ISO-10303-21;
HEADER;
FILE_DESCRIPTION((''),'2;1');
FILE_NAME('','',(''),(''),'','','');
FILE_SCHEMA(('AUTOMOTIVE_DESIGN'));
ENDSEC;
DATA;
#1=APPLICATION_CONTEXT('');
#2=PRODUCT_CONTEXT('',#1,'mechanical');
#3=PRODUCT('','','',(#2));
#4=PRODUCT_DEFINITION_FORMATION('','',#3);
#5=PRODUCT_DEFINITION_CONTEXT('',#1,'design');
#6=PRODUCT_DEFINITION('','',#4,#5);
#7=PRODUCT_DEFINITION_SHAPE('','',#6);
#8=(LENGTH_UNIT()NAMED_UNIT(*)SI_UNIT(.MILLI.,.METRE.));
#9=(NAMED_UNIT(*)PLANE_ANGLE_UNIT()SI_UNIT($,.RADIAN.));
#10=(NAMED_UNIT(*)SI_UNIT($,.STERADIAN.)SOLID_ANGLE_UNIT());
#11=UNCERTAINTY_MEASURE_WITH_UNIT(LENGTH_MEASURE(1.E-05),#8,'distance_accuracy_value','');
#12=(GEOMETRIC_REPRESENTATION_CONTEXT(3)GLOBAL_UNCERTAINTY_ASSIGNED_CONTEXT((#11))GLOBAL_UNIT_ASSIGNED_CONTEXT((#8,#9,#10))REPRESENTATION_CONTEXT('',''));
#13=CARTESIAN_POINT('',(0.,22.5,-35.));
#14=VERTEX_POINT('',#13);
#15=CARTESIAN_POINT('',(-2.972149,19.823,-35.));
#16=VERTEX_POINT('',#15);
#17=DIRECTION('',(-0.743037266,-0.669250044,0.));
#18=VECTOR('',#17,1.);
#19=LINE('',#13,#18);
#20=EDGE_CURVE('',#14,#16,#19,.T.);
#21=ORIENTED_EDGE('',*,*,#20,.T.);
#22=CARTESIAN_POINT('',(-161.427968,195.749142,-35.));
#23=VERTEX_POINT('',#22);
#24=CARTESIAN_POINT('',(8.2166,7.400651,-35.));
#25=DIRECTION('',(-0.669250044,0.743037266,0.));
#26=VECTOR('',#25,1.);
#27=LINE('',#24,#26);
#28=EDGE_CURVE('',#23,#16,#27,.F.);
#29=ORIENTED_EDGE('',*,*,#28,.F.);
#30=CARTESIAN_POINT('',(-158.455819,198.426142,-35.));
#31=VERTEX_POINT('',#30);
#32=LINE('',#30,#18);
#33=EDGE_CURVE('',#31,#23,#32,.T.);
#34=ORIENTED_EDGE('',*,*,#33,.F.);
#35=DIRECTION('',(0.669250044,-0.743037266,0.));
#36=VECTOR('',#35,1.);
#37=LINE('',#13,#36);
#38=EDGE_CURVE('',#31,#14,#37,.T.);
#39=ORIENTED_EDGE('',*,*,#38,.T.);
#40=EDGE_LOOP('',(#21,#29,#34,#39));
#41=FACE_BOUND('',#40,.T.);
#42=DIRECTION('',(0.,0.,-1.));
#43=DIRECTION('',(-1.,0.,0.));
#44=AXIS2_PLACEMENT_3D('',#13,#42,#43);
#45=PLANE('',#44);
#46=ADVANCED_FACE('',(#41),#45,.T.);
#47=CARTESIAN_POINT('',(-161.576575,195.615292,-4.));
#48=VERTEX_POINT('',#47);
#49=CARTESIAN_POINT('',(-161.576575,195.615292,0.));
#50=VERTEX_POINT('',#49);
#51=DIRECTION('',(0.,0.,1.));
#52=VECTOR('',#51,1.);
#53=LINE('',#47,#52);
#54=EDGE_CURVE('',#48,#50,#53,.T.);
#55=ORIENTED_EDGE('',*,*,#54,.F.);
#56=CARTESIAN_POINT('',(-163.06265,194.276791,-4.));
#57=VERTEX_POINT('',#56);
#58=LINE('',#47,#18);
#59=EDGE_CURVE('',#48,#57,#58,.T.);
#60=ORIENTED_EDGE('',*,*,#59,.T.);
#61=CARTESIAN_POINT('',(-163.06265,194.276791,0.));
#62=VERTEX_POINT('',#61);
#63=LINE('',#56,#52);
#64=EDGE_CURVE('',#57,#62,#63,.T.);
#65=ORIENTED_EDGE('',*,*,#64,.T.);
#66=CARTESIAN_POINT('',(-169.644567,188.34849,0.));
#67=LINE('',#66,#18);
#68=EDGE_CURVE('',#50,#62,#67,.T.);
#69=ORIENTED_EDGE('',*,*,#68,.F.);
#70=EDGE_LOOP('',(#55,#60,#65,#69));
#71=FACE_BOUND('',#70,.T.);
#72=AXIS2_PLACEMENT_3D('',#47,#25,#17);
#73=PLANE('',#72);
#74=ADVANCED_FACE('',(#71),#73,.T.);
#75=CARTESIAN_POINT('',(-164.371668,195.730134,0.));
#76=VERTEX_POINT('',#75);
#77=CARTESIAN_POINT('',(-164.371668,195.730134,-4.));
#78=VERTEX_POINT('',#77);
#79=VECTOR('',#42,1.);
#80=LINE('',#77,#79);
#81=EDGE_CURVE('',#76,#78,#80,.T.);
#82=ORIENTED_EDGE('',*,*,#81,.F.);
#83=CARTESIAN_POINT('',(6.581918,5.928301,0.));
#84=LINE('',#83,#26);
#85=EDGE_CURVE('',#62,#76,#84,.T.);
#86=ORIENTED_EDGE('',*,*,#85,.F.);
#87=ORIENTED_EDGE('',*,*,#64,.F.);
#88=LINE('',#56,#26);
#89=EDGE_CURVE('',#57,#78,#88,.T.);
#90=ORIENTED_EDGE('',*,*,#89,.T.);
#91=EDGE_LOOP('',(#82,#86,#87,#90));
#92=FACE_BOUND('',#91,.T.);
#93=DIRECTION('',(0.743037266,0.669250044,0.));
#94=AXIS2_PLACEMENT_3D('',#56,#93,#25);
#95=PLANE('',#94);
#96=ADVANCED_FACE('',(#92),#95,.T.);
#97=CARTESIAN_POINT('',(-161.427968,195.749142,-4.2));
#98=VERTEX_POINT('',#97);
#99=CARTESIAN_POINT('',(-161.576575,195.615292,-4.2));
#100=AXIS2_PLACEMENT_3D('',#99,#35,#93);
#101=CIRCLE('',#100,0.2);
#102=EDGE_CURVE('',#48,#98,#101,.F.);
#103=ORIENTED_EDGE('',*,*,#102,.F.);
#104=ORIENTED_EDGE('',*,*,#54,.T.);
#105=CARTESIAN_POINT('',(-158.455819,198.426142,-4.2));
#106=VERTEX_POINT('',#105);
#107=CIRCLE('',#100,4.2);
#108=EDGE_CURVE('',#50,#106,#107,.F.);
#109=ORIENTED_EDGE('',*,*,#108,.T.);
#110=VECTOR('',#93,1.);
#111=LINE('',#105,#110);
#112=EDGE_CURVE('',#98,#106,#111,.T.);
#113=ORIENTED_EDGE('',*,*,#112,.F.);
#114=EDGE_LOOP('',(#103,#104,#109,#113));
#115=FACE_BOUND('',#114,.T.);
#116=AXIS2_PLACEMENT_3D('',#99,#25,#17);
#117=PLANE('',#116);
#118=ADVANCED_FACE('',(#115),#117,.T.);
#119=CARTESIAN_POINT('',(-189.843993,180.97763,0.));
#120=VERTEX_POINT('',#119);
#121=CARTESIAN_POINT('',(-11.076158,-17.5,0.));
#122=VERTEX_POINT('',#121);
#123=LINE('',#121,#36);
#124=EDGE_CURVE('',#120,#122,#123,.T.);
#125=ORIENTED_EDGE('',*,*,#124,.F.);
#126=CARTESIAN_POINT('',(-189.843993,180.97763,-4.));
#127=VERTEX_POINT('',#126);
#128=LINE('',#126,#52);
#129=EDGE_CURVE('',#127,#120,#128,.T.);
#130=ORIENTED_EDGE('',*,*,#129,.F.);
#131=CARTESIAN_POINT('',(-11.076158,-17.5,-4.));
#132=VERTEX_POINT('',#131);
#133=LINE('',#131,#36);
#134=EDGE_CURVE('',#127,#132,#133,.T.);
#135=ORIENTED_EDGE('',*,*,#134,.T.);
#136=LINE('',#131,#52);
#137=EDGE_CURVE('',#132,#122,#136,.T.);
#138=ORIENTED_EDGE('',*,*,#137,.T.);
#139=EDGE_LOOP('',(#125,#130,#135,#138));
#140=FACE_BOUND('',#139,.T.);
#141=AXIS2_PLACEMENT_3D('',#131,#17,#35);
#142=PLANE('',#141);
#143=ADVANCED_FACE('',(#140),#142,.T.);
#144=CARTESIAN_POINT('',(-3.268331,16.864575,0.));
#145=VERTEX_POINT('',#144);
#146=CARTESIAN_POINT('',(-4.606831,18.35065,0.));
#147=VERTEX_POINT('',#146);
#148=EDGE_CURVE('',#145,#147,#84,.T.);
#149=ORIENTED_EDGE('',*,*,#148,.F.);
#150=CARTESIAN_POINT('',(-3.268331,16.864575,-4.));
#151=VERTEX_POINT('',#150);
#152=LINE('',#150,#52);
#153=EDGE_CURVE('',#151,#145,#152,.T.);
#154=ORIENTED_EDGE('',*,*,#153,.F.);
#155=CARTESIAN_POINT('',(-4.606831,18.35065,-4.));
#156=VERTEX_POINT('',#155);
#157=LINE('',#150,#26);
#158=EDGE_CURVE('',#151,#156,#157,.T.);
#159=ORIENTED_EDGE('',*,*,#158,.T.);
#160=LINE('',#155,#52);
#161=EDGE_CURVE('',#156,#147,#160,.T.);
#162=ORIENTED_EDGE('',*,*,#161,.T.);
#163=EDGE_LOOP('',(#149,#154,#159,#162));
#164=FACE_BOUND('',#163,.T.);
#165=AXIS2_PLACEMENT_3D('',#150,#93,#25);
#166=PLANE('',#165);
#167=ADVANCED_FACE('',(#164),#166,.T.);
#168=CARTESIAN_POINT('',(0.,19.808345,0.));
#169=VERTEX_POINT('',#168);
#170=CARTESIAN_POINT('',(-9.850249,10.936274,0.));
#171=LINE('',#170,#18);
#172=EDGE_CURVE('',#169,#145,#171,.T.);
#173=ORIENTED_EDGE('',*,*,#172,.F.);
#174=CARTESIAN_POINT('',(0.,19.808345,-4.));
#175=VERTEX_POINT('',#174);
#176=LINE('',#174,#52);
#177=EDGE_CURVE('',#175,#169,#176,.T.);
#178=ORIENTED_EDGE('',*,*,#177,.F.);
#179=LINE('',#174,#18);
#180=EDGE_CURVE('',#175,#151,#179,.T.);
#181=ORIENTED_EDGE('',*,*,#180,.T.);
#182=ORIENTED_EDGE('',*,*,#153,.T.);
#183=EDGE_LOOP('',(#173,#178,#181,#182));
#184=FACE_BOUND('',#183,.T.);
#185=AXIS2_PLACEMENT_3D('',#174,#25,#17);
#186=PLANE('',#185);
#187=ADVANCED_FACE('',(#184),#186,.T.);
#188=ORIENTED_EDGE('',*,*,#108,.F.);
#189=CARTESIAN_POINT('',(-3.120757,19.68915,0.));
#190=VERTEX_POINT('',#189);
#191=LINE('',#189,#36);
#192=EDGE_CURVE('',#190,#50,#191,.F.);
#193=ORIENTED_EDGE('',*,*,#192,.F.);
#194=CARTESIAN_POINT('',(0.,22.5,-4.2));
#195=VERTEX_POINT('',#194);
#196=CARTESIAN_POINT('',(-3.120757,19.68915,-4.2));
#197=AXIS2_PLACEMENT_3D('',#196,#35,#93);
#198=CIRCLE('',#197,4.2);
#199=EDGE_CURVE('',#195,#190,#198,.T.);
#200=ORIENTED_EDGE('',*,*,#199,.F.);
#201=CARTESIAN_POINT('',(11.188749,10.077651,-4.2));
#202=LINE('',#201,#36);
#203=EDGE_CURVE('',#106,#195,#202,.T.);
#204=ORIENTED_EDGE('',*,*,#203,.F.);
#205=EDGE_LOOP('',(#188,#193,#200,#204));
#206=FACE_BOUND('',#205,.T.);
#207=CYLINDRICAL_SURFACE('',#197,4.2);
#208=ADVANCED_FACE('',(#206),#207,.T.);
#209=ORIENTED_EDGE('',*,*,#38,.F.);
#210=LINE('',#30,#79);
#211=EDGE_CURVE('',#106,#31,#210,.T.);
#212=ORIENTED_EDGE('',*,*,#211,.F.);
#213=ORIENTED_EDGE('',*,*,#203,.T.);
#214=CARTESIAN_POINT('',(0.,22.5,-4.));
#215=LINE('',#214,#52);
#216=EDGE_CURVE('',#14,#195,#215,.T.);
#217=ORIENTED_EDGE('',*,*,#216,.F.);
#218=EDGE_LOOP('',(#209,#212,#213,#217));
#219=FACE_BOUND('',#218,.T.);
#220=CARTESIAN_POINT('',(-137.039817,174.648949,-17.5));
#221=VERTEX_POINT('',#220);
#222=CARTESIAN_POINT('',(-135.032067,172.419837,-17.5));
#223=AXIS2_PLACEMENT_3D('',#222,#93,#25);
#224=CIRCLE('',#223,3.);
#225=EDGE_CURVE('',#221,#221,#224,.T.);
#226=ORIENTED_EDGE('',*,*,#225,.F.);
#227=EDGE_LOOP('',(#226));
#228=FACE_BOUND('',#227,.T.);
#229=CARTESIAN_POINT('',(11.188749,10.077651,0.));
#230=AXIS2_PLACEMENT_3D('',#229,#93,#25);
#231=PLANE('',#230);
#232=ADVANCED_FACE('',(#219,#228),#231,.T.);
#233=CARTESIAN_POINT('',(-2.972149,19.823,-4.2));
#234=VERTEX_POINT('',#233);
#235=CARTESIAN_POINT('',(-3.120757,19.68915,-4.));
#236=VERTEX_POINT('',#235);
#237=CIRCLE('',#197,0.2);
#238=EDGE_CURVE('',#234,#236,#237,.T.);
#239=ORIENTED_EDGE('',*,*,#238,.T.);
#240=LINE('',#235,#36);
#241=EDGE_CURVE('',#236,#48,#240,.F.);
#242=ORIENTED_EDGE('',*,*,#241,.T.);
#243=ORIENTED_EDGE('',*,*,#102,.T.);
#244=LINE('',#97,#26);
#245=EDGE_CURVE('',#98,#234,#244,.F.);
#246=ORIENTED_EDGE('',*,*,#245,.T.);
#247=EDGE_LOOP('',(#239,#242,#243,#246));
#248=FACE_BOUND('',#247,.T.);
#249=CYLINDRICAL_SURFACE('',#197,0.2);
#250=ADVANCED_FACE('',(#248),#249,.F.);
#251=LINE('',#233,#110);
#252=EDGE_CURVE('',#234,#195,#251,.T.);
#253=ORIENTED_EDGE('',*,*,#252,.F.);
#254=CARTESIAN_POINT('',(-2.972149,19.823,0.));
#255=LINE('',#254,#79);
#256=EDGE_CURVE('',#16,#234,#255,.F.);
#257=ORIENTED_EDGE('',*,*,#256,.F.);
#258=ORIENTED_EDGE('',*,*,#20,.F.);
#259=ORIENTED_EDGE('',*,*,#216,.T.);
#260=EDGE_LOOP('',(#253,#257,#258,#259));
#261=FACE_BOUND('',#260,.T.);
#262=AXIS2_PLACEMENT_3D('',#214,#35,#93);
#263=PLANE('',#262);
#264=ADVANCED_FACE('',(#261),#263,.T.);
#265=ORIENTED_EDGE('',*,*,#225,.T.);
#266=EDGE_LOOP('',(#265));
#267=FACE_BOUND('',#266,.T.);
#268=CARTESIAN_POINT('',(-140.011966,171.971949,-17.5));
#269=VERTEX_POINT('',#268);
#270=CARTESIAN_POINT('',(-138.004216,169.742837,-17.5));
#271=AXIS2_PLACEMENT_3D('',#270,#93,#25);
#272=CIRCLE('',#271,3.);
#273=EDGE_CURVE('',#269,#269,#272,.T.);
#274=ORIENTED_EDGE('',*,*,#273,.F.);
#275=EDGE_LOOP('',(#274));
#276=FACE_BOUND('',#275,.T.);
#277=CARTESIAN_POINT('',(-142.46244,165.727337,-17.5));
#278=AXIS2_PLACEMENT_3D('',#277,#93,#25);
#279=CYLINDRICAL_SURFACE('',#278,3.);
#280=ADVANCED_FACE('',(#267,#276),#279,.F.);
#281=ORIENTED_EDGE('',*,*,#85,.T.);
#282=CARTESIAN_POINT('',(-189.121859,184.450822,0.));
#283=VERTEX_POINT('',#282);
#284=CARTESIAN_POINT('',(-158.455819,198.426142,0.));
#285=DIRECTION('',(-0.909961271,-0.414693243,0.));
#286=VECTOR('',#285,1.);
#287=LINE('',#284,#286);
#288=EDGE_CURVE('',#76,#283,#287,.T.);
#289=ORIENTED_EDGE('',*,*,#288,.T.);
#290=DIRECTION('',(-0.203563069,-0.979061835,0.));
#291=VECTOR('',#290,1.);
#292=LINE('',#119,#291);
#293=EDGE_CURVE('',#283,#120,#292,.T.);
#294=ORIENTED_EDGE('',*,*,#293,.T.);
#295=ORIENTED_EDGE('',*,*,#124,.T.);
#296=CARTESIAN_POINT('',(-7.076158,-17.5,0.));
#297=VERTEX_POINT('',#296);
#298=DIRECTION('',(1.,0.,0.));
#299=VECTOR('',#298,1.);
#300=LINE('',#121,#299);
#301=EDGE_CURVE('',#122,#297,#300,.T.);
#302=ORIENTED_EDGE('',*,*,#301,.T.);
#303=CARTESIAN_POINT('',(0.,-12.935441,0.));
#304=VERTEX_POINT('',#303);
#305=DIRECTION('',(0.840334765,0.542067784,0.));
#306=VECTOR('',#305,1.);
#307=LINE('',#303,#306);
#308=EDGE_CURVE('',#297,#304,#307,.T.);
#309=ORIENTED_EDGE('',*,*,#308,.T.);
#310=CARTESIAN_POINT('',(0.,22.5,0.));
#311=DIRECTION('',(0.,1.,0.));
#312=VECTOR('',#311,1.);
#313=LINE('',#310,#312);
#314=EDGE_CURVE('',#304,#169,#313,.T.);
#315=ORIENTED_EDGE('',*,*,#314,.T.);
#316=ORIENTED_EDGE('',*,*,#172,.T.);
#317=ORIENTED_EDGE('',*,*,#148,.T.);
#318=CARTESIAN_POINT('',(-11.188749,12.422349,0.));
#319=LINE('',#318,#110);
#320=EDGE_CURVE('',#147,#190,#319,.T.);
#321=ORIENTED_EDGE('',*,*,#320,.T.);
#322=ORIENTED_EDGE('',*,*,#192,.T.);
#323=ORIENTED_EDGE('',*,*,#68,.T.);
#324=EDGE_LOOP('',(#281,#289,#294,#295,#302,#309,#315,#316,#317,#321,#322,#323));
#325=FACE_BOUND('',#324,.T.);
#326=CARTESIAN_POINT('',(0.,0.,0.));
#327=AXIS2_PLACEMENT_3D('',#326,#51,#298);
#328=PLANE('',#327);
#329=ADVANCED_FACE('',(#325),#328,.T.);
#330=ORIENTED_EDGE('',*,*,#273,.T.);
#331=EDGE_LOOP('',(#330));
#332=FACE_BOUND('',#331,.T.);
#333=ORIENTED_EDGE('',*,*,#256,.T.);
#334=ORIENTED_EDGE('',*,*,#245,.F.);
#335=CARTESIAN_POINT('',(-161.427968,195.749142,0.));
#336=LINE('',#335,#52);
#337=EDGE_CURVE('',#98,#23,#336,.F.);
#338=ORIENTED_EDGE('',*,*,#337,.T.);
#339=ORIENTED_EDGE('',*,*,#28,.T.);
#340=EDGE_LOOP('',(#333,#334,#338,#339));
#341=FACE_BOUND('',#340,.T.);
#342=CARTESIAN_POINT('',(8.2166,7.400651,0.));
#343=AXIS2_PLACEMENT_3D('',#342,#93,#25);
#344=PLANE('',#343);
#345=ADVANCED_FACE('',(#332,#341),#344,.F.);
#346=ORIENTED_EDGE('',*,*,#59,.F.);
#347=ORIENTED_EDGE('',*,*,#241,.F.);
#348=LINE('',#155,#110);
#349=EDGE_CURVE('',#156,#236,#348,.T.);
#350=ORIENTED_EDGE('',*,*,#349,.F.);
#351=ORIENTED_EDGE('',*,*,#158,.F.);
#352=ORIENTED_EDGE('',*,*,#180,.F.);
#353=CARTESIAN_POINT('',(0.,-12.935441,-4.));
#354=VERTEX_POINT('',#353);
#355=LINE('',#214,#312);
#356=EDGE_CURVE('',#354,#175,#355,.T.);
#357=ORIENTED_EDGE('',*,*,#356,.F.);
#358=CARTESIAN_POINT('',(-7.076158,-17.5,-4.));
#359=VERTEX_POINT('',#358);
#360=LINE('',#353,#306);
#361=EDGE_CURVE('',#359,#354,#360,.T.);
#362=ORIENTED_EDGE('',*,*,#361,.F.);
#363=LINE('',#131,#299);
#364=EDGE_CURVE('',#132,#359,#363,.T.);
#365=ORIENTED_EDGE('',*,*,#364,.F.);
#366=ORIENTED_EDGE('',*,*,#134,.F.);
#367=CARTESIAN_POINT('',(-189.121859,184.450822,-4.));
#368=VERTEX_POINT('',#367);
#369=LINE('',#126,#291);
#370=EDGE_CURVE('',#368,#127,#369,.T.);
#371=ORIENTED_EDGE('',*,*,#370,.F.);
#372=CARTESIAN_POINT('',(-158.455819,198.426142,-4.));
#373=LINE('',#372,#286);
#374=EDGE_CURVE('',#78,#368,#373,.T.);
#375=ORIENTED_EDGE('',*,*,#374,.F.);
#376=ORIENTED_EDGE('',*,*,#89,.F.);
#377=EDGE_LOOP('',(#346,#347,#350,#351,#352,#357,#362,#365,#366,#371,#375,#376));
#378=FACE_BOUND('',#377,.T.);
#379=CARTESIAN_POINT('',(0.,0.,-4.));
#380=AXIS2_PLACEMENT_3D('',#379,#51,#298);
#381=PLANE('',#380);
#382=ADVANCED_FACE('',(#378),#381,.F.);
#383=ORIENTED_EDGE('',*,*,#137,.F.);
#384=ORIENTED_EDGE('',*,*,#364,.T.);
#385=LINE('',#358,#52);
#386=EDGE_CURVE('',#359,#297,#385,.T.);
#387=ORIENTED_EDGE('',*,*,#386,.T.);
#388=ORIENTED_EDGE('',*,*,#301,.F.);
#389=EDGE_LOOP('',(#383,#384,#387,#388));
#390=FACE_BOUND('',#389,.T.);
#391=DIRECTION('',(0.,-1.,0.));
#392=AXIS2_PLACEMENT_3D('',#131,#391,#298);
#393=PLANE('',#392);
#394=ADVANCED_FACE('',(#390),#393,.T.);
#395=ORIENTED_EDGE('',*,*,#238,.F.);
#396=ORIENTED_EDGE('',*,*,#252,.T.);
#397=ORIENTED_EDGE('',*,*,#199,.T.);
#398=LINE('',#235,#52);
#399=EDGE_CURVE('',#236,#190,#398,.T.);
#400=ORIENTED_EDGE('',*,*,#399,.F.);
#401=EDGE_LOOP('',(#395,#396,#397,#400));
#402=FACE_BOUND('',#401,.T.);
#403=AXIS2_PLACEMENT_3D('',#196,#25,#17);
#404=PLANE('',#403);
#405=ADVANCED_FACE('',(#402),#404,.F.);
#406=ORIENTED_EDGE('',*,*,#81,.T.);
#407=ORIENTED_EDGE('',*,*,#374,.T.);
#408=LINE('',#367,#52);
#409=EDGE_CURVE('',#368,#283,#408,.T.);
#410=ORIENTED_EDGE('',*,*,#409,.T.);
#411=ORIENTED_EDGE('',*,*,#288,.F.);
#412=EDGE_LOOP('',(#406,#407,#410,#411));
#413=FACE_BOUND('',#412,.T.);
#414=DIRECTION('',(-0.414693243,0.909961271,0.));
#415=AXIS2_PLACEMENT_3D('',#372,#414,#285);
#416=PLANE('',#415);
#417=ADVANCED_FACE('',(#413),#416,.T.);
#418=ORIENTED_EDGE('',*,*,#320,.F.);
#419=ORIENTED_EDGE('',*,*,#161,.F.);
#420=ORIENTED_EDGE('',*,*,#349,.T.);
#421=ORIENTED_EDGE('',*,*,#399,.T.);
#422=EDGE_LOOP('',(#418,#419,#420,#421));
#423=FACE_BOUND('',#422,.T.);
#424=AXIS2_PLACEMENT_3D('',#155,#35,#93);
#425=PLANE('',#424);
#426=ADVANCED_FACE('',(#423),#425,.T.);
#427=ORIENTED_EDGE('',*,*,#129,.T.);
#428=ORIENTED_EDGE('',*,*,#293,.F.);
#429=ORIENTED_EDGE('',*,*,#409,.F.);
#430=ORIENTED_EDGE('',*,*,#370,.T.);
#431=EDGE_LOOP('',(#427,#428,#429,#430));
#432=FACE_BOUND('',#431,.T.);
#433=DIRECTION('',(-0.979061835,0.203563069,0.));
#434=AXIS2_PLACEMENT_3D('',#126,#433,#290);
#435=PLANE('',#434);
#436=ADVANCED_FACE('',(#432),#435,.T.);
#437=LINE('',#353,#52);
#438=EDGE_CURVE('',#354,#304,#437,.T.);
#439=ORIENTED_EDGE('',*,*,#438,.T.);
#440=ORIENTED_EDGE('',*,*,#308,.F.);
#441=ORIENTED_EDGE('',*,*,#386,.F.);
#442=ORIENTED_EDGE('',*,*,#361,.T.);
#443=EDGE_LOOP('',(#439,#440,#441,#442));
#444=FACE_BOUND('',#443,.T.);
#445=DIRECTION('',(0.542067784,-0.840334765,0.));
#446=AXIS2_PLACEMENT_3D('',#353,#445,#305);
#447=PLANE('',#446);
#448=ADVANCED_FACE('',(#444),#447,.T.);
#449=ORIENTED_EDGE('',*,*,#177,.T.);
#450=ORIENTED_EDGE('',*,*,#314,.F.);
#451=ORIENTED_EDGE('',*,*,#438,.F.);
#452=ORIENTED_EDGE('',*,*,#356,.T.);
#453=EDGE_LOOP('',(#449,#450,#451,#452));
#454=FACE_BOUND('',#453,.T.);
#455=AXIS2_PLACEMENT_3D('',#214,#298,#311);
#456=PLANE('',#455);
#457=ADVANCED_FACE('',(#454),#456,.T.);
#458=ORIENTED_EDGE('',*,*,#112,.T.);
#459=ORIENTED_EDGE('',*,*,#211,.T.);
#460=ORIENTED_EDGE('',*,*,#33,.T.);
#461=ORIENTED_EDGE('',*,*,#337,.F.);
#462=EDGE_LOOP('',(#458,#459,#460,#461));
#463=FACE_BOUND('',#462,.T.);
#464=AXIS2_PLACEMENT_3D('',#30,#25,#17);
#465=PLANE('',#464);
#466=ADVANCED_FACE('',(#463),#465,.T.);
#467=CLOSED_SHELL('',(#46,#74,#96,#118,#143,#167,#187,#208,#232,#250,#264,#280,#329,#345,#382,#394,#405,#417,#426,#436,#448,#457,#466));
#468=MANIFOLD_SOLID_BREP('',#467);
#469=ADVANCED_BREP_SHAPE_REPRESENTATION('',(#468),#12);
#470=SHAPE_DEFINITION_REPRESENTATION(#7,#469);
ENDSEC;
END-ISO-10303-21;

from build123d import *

# Parameters (mm, degrees)
BASE_FLANGE1_DEPTH            = 4
EDGE_FLANGE1_STRIP_W          = 16.4
EDGE_FLANGE1_STRIP_H          = 4
EDGE_FLANGE1_STRIP_CUT_DEPTH  = 236.766242904
EDGE_FLANGE1_RELIEF_W         = 18.4
EDGE_FLANGE1_RELIEF_H         = 2
EDGE_FLANGE1_RELIEF_CUT_DEPTH = 4
EDGE_FLANGE1_DEPTH            = 236.766242904
SKETCH9_R                     = 3
CUT_EXTRUDE1_DEPTH            = 10


# Sheet-metal steps are written as plain solids
with BuildPart() as part:
    # Sketch1 → Base-Flange1 (new body)
    with BuildSketch(Plane.XY):
        Polygon((0, 22.5), (-158.455818563, 198.426141726), (-189.121858967, 184.45082196), (-189.843992647, 180.977630435), (-11.076158097, -17.5), (-7.076158097, -17.5), (0, -12.935441332), align=None)
    extrude(amount=-BASE_FLANGE1_DEPTH)

    # Edge-Flange1 strip (across the edge) → Edge-Flange1 strip cut (cut)
    with BuildSketch(Plane(origin=(-158.455818563, 198.426141726, -4), x_dir=(-0.7430372656499554, -0.6692500443447409, -3.4914813388431334e-15), z_dir=(0.6692500443447409, -0.7430372656499554, 0))):
        with Locations((-4, -2)):
            Rectangle(EDGE_FLANGE1_STRIP_W, EDGE_FLANGE1_STRIP_H)
    extrude(amount=EDGE_FLANGE1_STRIP_CUT_DEPTH, mode=Mode.SUBTRACT)

    # Edge-Flange1 relief (on the sheet) → Edge-Flange1 relief cut (cut)
    with BuildSketch(Plane(origin=(-161.576575079, 195.615291539, -4), x_dir=(-0.7430372656499554, -0.6692500443447409, -6.982962677686267e-15), z_dir=(0, 0, -1))):
        with Locations((-7.2, 1)):
            Rectangle(EDGE_FLANGE1_RELIEF_W, EDGE_FLANGE1_RELIEF_H)
        with Locations((-7.2, -237.766242904)):
            Rectangle(EDGE_FLANGE1_RELIEF_W, EDGE_FLANGE1_RELIEF_H)
    extrude(amount=-EDGE_FLANGE1_RELIEF_CUT_DEPTH, mode=Mode.SUBTRACT)

    # Edge-Flange1 section (across the edge) → Edge-Flange1 (add)
    with BuildSketch(Plane(origin=(-158.455818563, 198.426141726, -4), x_dir=(-0.7430372656499554, -0.6692500443447409, -3.4914813388431334e-15), z_dir=(0.6692500443447409, -0.7430372656499554, 0))):
        with BuildLine():
            Line((0, 0.2), (0, 31))
            Line((0, 31), (4, 31))
            Line((4, 31), (4, 0.2))
            ThreePointArc((4, 0.2), (4.058578644, 0.058578644), (4.2, 0))
            Line((4.2, 0), (4.2, -4))
            ThreePointArc((4.2, -4), (1.230151519, -2.769848481), (0, 0.2))
        make_face()
    extrude(amount=EDGE_FLANGE1_DEPTH)

    # Sketch9 → Cut-Extrude1 (cut)
    with BuildSketch(Plane(origin=(11.188748767, 10.077651492, 0), x_dir=(0, 0, -1), z_dir=(0.7430372656499554, 0.6692500443447409, -3.560476072298782e-15))):
        with Locations(Location((17.5, 218.484581381, 0), (0, 0, 90))):
            Circle(SKETCH9_R)
    extrude(amount=-CUT_EXTRUDE1_DEPTH, mode=Mode.SUBTRACT)


solid = part.part
